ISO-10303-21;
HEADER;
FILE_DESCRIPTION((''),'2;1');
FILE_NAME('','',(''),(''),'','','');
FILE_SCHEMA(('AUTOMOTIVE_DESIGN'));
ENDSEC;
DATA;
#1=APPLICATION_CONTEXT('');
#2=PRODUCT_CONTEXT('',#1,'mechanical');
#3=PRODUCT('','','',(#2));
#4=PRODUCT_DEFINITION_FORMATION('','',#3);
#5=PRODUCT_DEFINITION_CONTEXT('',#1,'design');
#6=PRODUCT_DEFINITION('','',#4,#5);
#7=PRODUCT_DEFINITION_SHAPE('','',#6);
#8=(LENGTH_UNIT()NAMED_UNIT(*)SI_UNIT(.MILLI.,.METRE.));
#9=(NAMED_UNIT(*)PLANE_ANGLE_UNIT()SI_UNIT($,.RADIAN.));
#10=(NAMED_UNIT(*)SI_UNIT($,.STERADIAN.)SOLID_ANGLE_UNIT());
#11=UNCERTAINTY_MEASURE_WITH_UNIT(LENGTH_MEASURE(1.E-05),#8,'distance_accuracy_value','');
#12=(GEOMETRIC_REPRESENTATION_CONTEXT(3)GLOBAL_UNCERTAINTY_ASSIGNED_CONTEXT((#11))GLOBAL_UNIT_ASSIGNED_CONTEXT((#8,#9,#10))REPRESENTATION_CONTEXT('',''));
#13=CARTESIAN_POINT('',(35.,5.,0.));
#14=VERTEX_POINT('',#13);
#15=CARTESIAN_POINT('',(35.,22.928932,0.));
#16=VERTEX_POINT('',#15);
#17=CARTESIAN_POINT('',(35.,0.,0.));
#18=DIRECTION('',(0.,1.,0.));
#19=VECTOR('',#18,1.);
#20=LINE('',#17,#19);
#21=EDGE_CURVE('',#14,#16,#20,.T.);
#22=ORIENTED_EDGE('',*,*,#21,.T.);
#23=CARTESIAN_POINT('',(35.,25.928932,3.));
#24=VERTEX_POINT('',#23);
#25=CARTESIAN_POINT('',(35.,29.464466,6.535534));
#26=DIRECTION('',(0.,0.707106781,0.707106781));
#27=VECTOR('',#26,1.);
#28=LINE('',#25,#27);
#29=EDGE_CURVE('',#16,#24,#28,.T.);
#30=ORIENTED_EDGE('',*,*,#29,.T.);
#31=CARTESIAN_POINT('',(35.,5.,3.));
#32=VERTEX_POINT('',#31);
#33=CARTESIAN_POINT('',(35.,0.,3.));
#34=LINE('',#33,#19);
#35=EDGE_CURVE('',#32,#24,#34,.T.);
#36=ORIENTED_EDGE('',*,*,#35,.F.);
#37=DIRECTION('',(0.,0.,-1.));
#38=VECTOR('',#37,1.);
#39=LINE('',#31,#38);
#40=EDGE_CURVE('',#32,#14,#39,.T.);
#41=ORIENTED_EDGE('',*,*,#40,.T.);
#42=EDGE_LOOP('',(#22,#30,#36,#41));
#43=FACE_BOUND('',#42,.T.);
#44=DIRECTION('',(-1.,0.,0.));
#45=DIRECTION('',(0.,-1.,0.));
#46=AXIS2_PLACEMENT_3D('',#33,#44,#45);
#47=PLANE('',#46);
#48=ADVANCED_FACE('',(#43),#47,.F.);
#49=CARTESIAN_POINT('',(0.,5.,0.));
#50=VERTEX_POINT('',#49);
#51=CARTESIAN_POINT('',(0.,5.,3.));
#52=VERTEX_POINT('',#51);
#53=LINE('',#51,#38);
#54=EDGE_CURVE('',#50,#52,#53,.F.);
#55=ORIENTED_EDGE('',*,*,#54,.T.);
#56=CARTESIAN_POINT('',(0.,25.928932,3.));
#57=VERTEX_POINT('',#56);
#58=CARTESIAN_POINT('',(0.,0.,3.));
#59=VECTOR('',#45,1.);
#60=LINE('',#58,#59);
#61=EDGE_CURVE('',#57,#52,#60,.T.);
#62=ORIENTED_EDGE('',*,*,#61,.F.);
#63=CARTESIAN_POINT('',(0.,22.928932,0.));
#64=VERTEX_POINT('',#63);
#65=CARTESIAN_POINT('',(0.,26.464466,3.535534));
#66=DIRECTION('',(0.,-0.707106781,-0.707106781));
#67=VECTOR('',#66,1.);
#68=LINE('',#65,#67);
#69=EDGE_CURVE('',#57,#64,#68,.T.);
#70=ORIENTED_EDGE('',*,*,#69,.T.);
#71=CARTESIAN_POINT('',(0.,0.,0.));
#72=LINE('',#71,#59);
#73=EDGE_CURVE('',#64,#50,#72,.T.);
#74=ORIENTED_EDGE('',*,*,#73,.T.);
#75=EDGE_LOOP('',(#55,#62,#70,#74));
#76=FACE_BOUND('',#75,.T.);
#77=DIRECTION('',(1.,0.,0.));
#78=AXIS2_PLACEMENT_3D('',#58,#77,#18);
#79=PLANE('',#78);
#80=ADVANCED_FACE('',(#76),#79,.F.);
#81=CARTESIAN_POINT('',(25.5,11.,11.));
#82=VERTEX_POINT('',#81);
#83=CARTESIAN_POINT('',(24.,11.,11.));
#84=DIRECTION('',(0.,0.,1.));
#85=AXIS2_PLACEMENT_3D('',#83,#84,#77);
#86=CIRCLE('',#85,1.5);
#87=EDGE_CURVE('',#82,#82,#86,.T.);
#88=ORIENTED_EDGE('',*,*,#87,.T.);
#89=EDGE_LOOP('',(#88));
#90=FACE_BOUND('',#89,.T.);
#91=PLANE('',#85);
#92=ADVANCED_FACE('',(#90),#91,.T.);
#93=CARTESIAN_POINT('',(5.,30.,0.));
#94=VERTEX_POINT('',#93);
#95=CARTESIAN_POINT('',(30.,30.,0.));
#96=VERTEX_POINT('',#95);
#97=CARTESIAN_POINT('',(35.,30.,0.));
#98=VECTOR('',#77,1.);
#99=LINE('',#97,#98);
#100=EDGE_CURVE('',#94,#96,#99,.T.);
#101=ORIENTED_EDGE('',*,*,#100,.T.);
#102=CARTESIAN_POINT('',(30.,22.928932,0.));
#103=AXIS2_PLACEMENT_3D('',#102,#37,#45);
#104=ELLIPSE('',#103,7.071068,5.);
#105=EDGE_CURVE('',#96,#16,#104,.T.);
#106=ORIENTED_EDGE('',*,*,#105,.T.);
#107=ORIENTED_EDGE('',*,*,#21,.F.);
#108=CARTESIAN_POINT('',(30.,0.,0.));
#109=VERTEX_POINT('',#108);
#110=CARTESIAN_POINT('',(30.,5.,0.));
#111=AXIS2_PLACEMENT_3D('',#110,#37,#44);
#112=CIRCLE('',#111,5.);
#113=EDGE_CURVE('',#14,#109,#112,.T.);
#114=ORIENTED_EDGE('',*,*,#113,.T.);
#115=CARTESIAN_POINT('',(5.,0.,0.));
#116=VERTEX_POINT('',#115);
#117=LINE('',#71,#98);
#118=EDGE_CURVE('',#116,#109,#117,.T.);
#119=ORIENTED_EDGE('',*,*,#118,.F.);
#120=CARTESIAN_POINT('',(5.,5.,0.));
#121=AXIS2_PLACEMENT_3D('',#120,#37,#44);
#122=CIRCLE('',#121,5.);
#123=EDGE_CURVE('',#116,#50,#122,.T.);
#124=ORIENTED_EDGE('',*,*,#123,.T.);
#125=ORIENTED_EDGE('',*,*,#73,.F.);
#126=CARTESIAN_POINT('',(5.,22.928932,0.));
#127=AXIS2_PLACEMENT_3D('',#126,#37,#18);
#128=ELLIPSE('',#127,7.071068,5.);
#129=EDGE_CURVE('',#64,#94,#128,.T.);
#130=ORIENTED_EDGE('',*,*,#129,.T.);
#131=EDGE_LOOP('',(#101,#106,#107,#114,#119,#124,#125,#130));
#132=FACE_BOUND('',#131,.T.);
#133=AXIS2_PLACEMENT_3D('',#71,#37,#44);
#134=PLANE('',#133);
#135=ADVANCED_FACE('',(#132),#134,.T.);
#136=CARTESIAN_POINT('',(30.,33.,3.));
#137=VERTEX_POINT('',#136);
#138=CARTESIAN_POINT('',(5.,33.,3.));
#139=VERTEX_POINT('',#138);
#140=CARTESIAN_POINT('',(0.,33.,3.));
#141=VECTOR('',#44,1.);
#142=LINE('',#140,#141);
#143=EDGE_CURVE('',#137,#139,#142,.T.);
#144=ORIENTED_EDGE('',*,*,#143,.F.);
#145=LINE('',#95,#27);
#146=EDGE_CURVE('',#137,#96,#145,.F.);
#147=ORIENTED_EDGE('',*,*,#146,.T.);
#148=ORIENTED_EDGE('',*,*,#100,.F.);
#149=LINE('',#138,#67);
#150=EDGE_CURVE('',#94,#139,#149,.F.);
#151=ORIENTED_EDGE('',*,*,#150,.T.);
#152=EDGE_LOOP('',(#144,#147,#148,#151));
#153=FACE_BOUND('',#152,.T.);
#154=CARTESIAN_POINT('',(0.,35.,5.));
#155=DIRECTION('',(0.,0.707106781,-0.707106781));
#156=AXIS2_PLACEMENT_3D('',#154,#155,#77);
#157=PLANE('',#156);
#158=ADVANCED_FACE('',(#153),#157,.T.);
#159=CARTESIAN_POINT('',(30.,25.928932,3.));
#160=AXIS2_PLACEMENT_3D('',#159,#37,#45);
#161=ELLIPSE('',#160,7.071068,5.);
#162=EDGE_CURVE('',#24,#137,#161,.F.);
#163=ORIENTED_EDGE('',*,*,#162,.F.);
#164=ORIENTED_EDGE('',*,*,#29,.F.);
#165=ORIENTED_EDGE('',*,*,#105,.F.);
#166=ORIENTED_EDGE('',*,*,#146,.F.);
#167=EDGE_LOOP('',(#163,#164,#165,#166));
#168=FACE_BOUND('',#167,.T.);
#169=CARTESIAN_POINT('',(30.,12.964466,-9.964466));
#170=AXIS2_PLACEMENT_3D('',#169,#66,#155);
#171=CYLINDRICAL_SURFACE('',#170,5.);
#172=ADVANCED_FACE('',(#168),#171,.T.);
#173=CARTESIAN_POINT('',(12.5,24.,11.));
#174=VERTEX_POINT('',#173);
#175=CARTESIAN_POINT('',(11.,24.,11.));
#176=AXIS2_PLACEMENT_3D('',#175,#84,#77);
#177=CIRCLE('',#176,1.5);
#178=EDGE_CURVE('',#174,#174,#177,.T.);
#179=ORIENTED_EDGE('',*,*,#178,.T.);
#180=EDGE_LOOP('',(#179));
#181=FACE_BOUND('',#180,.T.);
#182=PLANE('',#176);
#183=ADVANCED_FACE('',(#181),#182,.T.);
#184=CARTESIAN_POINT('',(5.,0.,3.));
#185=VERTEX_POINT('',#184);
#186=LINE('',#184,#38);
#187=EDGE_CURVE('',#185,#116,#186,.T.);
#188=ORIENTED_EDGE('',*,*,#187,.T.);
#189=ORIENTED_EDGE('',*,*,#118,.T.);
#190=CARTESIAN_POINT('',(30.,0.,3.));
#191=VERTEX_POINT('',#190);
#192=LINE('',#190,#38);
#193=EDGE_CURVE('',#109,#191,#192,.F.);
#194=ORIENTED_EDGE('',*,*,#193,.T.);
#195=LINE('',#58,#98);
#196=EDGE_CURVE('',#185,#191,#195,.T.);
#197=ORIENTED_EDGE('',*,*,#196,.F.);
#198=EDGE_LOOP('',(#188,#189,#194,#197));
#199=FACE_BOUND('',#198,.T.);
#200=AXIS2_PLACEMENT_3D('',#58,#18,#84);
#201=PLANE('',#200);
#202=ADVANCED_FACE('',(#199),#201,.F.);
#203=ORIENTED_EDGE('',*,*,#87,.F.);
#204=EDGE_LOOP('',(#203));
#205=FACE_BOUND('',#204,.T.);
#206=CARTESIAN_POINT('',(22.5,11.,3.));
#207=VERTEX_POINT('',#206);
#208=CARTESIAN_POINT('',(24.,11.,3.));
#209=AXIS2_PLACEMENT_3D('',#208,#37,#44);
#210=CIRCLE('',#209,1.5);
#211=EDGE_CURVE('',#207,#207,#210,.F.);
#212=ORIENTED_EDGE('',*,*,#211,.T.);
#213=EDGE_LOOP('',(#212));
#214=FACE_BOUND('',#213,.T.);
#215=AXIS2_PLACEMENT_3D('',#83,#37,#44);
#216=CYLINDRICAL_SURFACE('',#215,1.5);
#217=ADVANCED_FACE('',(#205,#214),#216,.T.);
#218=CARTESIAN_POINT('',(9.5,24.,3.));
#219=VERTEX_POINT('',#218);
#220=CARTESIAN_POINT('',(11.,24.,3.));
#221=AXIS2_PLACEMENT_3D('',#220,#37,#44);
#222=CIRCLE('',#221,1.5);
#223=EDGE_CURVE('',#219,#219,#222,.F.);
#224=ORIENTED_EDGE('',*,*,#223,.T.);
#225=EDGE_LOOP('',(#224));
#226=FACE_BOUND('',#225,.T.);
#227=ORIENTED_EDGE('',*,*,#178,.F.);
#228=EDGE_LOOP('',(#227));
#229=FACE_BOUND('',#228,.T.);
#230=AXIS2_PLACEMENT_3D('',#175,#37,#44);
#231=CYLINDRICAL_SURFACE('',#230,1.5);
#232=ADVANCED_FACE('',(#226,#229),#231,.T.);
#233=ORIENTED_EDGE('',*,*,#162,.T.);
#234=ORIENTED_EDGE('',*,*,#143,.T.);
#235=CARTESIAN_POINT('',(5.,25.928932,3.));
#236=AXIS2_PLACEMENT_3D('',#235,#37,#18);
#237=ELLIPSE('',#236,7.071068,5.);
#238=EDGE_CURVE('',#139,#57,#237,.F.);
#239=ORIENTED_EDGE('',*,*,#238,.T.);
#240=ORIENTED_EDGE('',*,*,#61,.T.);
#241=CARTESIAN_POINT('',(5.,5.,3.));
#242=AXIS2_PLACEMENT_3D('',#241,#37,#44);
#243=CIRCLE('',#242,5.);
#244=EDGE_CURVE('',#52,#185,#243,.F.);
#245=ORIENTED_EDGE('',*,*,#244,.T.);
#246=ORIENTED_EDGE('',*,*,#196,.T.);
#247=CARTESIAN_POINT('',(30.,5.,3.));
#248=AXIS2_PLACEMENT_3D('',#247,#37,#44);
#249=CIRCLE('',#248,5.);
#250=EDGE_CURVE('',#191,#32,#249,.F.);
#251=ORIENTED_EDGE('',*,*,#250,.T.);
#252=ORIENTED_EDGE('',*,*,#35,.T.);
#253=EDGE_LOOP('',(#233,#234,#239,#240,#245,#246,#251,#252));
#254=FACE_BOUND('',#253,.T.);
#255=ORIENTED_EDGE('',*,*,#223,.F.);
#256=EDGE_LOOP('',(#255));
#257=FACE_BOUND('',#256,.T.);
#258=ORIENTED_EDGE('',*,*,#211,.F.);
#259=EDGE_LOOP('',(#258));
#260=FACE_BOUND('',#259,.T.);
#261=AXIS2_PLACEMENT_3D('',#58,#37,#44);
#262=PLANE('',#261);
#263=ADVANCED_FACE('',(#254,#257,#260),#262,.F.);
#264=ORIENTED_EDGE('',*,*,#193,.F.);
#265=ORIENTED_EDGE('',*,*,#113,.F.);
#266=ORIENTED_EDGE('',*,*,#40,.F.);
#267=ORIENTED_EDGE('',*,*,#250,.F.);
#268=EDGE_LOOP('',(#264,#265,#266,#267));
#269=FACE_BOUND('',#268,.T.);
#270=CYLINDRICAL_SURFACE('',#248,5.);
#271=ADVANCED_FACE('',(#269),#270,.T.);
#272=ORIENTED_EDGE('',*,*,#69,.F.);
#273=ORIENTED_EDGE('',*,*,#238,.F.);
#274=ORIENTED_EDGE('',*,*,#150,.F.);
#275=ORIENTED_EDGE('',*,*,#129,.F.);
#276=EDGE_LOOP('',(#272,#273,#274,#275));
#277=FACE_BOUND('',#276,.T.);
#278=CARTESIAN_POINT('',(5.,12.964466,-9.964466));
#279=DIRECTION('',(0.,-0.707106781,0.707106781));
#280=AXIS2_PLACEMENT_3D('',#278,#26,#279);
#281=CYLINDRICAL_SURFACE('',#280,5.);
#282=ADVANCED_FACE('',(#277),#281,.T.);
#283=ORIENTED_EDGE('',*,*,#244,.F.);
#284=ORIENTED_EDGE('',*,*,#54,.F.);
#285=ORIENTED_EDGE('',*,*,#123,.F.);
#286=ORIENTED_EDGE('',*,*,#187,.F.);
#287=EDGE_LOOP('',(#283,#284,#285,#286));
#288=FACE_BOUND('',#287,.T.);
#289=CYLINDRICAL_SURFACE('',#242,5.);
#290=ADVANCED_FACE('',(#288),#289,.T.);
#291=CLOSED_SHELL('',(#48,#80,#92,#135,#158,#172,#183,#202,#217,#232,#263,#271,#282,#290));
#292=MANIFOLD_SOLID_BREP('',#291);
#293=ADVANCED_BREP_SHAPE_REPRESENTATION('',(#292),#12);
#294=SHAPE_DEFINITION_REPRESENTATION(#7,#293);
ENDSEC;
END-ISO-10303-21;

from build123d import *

# Parameters (mm, degrees)
SKETCH1_W           = 35
SKETCH1_H           = 35
BOSS_EXTRUDE1_DEPTH = 3
SKETCH2_R           = 1.5
BOSS_EXTRUDE2_DEPTH = 8
CHAMFER1_SIZE       = 5
FILLET1_R           = 5


with BuildPart() as part:
    # Sketch1 → Boss-Extrude1 (new body)
    with BuildSketch(Plane.XY):
        with Locations((17.5, 17.5)):
            Rectangle(SKETCH1_W, SKETCH1_H)
    extrude(amount=BOSS_EXTRUDE1_DEPTH)

    # Sketch2 → Boss-Extrude2 (add)
    with BuildSketch(Plane.XY.offset(3)):
        with Locations(Location((11, 24, 0), (0, 0, 180))):
            Circle(SKETCH2_R)
        with Locations(Location((24, 11, 0), (0, 0, 180))):
            Circle(SKETCH2_R)
    extrude(amount=BOSS_EXTRUDE2_DEPTH)

    # Chamfer1
    # the kernel refuses this chamfer: 5 mm, written as the material it takes off along each edge
    with BuildSketch(Plane(origin=(47.85841494, 35, 0), x_dir=(0, -0.9996219169112968, -0.027495876610586372), z_dir=(-1, 0, 0))) as chamfer1_piece_1:
        Polygon((CHAMFER1_SIZE * 0.999621916911, CHAMFER1_SIZE * 0.0274958766106), (-CHAMFER1_SIZE * 0.0274958766106, CHAMFER1_SIZE * 0.999621916911), (0, 0), align=None)
    extrude(amount=60.71682988, mode=Mode.SUBTRACT)

    # Fillet1
    # the kernel refuses this fillet: 5 mm, written as the material it takes off along each edge
    with BuildSketch(Plane(origin=(0, 21.161165235, -8.838834765), x_dir=(0, -0.7071067811868302, 0.7071067811862648), z_dir=(0, 0.7071067811862648, 0.7071067811868302)), Plane(origin=(35, 41.838834765, 11.838834765), x_dir=(0, -0.7071067811868302, 0.7071067811862648), z_dir=(0, -0.7071067811862648, -0.7071067811868302))) as fillet1_piece_1:
        with BuildLine():
            CenterArc((FILLET1_R, FILLET1_R), FILLET1_R, 180, 90)
            Line((0, FILLET1_R), (0, 0))
            Line((0, 0), (FILLET1_R, 0))
        make_face()
    extrude(amount=29.242640687, mode=Mode.SUBTRACT)
    with BuildSketch(Plane(origin=(35, 0, -12.5), x_dir=(-1, 0, 0), z_dir=(0, 0, 1))) as fillet1_piece_2:
        with BuildLine():
            CenterArc((FILLET1_R, -FILLET1_R), FILLET1_R, 90, 90)
            Line((0, -FILLET1_R), (0, 0))
            Line((0, 0), (FILLET1_R, 0))
        make_face()
    extrude(amount=28, mode=Mode.SUBTRACT)
    with BuildSketch(Plane(origin=(0, 0, -12.5), x_dir=(1, 0, 0), z_dir=(0, 0, 1))) as fillet1_piece_3:
        with BuildLine():
            CenterArc((FILLET1_R, FILLET1_R), FILLET1_R, 180, 90)
            Line((0, FILLET1_R), (0, 0))
            Line((0, 0), (FILLET1_R, 0))
        make_face()
    extrude(amount=28, mode=Mode.SUBTRACT)


solid = part.part
